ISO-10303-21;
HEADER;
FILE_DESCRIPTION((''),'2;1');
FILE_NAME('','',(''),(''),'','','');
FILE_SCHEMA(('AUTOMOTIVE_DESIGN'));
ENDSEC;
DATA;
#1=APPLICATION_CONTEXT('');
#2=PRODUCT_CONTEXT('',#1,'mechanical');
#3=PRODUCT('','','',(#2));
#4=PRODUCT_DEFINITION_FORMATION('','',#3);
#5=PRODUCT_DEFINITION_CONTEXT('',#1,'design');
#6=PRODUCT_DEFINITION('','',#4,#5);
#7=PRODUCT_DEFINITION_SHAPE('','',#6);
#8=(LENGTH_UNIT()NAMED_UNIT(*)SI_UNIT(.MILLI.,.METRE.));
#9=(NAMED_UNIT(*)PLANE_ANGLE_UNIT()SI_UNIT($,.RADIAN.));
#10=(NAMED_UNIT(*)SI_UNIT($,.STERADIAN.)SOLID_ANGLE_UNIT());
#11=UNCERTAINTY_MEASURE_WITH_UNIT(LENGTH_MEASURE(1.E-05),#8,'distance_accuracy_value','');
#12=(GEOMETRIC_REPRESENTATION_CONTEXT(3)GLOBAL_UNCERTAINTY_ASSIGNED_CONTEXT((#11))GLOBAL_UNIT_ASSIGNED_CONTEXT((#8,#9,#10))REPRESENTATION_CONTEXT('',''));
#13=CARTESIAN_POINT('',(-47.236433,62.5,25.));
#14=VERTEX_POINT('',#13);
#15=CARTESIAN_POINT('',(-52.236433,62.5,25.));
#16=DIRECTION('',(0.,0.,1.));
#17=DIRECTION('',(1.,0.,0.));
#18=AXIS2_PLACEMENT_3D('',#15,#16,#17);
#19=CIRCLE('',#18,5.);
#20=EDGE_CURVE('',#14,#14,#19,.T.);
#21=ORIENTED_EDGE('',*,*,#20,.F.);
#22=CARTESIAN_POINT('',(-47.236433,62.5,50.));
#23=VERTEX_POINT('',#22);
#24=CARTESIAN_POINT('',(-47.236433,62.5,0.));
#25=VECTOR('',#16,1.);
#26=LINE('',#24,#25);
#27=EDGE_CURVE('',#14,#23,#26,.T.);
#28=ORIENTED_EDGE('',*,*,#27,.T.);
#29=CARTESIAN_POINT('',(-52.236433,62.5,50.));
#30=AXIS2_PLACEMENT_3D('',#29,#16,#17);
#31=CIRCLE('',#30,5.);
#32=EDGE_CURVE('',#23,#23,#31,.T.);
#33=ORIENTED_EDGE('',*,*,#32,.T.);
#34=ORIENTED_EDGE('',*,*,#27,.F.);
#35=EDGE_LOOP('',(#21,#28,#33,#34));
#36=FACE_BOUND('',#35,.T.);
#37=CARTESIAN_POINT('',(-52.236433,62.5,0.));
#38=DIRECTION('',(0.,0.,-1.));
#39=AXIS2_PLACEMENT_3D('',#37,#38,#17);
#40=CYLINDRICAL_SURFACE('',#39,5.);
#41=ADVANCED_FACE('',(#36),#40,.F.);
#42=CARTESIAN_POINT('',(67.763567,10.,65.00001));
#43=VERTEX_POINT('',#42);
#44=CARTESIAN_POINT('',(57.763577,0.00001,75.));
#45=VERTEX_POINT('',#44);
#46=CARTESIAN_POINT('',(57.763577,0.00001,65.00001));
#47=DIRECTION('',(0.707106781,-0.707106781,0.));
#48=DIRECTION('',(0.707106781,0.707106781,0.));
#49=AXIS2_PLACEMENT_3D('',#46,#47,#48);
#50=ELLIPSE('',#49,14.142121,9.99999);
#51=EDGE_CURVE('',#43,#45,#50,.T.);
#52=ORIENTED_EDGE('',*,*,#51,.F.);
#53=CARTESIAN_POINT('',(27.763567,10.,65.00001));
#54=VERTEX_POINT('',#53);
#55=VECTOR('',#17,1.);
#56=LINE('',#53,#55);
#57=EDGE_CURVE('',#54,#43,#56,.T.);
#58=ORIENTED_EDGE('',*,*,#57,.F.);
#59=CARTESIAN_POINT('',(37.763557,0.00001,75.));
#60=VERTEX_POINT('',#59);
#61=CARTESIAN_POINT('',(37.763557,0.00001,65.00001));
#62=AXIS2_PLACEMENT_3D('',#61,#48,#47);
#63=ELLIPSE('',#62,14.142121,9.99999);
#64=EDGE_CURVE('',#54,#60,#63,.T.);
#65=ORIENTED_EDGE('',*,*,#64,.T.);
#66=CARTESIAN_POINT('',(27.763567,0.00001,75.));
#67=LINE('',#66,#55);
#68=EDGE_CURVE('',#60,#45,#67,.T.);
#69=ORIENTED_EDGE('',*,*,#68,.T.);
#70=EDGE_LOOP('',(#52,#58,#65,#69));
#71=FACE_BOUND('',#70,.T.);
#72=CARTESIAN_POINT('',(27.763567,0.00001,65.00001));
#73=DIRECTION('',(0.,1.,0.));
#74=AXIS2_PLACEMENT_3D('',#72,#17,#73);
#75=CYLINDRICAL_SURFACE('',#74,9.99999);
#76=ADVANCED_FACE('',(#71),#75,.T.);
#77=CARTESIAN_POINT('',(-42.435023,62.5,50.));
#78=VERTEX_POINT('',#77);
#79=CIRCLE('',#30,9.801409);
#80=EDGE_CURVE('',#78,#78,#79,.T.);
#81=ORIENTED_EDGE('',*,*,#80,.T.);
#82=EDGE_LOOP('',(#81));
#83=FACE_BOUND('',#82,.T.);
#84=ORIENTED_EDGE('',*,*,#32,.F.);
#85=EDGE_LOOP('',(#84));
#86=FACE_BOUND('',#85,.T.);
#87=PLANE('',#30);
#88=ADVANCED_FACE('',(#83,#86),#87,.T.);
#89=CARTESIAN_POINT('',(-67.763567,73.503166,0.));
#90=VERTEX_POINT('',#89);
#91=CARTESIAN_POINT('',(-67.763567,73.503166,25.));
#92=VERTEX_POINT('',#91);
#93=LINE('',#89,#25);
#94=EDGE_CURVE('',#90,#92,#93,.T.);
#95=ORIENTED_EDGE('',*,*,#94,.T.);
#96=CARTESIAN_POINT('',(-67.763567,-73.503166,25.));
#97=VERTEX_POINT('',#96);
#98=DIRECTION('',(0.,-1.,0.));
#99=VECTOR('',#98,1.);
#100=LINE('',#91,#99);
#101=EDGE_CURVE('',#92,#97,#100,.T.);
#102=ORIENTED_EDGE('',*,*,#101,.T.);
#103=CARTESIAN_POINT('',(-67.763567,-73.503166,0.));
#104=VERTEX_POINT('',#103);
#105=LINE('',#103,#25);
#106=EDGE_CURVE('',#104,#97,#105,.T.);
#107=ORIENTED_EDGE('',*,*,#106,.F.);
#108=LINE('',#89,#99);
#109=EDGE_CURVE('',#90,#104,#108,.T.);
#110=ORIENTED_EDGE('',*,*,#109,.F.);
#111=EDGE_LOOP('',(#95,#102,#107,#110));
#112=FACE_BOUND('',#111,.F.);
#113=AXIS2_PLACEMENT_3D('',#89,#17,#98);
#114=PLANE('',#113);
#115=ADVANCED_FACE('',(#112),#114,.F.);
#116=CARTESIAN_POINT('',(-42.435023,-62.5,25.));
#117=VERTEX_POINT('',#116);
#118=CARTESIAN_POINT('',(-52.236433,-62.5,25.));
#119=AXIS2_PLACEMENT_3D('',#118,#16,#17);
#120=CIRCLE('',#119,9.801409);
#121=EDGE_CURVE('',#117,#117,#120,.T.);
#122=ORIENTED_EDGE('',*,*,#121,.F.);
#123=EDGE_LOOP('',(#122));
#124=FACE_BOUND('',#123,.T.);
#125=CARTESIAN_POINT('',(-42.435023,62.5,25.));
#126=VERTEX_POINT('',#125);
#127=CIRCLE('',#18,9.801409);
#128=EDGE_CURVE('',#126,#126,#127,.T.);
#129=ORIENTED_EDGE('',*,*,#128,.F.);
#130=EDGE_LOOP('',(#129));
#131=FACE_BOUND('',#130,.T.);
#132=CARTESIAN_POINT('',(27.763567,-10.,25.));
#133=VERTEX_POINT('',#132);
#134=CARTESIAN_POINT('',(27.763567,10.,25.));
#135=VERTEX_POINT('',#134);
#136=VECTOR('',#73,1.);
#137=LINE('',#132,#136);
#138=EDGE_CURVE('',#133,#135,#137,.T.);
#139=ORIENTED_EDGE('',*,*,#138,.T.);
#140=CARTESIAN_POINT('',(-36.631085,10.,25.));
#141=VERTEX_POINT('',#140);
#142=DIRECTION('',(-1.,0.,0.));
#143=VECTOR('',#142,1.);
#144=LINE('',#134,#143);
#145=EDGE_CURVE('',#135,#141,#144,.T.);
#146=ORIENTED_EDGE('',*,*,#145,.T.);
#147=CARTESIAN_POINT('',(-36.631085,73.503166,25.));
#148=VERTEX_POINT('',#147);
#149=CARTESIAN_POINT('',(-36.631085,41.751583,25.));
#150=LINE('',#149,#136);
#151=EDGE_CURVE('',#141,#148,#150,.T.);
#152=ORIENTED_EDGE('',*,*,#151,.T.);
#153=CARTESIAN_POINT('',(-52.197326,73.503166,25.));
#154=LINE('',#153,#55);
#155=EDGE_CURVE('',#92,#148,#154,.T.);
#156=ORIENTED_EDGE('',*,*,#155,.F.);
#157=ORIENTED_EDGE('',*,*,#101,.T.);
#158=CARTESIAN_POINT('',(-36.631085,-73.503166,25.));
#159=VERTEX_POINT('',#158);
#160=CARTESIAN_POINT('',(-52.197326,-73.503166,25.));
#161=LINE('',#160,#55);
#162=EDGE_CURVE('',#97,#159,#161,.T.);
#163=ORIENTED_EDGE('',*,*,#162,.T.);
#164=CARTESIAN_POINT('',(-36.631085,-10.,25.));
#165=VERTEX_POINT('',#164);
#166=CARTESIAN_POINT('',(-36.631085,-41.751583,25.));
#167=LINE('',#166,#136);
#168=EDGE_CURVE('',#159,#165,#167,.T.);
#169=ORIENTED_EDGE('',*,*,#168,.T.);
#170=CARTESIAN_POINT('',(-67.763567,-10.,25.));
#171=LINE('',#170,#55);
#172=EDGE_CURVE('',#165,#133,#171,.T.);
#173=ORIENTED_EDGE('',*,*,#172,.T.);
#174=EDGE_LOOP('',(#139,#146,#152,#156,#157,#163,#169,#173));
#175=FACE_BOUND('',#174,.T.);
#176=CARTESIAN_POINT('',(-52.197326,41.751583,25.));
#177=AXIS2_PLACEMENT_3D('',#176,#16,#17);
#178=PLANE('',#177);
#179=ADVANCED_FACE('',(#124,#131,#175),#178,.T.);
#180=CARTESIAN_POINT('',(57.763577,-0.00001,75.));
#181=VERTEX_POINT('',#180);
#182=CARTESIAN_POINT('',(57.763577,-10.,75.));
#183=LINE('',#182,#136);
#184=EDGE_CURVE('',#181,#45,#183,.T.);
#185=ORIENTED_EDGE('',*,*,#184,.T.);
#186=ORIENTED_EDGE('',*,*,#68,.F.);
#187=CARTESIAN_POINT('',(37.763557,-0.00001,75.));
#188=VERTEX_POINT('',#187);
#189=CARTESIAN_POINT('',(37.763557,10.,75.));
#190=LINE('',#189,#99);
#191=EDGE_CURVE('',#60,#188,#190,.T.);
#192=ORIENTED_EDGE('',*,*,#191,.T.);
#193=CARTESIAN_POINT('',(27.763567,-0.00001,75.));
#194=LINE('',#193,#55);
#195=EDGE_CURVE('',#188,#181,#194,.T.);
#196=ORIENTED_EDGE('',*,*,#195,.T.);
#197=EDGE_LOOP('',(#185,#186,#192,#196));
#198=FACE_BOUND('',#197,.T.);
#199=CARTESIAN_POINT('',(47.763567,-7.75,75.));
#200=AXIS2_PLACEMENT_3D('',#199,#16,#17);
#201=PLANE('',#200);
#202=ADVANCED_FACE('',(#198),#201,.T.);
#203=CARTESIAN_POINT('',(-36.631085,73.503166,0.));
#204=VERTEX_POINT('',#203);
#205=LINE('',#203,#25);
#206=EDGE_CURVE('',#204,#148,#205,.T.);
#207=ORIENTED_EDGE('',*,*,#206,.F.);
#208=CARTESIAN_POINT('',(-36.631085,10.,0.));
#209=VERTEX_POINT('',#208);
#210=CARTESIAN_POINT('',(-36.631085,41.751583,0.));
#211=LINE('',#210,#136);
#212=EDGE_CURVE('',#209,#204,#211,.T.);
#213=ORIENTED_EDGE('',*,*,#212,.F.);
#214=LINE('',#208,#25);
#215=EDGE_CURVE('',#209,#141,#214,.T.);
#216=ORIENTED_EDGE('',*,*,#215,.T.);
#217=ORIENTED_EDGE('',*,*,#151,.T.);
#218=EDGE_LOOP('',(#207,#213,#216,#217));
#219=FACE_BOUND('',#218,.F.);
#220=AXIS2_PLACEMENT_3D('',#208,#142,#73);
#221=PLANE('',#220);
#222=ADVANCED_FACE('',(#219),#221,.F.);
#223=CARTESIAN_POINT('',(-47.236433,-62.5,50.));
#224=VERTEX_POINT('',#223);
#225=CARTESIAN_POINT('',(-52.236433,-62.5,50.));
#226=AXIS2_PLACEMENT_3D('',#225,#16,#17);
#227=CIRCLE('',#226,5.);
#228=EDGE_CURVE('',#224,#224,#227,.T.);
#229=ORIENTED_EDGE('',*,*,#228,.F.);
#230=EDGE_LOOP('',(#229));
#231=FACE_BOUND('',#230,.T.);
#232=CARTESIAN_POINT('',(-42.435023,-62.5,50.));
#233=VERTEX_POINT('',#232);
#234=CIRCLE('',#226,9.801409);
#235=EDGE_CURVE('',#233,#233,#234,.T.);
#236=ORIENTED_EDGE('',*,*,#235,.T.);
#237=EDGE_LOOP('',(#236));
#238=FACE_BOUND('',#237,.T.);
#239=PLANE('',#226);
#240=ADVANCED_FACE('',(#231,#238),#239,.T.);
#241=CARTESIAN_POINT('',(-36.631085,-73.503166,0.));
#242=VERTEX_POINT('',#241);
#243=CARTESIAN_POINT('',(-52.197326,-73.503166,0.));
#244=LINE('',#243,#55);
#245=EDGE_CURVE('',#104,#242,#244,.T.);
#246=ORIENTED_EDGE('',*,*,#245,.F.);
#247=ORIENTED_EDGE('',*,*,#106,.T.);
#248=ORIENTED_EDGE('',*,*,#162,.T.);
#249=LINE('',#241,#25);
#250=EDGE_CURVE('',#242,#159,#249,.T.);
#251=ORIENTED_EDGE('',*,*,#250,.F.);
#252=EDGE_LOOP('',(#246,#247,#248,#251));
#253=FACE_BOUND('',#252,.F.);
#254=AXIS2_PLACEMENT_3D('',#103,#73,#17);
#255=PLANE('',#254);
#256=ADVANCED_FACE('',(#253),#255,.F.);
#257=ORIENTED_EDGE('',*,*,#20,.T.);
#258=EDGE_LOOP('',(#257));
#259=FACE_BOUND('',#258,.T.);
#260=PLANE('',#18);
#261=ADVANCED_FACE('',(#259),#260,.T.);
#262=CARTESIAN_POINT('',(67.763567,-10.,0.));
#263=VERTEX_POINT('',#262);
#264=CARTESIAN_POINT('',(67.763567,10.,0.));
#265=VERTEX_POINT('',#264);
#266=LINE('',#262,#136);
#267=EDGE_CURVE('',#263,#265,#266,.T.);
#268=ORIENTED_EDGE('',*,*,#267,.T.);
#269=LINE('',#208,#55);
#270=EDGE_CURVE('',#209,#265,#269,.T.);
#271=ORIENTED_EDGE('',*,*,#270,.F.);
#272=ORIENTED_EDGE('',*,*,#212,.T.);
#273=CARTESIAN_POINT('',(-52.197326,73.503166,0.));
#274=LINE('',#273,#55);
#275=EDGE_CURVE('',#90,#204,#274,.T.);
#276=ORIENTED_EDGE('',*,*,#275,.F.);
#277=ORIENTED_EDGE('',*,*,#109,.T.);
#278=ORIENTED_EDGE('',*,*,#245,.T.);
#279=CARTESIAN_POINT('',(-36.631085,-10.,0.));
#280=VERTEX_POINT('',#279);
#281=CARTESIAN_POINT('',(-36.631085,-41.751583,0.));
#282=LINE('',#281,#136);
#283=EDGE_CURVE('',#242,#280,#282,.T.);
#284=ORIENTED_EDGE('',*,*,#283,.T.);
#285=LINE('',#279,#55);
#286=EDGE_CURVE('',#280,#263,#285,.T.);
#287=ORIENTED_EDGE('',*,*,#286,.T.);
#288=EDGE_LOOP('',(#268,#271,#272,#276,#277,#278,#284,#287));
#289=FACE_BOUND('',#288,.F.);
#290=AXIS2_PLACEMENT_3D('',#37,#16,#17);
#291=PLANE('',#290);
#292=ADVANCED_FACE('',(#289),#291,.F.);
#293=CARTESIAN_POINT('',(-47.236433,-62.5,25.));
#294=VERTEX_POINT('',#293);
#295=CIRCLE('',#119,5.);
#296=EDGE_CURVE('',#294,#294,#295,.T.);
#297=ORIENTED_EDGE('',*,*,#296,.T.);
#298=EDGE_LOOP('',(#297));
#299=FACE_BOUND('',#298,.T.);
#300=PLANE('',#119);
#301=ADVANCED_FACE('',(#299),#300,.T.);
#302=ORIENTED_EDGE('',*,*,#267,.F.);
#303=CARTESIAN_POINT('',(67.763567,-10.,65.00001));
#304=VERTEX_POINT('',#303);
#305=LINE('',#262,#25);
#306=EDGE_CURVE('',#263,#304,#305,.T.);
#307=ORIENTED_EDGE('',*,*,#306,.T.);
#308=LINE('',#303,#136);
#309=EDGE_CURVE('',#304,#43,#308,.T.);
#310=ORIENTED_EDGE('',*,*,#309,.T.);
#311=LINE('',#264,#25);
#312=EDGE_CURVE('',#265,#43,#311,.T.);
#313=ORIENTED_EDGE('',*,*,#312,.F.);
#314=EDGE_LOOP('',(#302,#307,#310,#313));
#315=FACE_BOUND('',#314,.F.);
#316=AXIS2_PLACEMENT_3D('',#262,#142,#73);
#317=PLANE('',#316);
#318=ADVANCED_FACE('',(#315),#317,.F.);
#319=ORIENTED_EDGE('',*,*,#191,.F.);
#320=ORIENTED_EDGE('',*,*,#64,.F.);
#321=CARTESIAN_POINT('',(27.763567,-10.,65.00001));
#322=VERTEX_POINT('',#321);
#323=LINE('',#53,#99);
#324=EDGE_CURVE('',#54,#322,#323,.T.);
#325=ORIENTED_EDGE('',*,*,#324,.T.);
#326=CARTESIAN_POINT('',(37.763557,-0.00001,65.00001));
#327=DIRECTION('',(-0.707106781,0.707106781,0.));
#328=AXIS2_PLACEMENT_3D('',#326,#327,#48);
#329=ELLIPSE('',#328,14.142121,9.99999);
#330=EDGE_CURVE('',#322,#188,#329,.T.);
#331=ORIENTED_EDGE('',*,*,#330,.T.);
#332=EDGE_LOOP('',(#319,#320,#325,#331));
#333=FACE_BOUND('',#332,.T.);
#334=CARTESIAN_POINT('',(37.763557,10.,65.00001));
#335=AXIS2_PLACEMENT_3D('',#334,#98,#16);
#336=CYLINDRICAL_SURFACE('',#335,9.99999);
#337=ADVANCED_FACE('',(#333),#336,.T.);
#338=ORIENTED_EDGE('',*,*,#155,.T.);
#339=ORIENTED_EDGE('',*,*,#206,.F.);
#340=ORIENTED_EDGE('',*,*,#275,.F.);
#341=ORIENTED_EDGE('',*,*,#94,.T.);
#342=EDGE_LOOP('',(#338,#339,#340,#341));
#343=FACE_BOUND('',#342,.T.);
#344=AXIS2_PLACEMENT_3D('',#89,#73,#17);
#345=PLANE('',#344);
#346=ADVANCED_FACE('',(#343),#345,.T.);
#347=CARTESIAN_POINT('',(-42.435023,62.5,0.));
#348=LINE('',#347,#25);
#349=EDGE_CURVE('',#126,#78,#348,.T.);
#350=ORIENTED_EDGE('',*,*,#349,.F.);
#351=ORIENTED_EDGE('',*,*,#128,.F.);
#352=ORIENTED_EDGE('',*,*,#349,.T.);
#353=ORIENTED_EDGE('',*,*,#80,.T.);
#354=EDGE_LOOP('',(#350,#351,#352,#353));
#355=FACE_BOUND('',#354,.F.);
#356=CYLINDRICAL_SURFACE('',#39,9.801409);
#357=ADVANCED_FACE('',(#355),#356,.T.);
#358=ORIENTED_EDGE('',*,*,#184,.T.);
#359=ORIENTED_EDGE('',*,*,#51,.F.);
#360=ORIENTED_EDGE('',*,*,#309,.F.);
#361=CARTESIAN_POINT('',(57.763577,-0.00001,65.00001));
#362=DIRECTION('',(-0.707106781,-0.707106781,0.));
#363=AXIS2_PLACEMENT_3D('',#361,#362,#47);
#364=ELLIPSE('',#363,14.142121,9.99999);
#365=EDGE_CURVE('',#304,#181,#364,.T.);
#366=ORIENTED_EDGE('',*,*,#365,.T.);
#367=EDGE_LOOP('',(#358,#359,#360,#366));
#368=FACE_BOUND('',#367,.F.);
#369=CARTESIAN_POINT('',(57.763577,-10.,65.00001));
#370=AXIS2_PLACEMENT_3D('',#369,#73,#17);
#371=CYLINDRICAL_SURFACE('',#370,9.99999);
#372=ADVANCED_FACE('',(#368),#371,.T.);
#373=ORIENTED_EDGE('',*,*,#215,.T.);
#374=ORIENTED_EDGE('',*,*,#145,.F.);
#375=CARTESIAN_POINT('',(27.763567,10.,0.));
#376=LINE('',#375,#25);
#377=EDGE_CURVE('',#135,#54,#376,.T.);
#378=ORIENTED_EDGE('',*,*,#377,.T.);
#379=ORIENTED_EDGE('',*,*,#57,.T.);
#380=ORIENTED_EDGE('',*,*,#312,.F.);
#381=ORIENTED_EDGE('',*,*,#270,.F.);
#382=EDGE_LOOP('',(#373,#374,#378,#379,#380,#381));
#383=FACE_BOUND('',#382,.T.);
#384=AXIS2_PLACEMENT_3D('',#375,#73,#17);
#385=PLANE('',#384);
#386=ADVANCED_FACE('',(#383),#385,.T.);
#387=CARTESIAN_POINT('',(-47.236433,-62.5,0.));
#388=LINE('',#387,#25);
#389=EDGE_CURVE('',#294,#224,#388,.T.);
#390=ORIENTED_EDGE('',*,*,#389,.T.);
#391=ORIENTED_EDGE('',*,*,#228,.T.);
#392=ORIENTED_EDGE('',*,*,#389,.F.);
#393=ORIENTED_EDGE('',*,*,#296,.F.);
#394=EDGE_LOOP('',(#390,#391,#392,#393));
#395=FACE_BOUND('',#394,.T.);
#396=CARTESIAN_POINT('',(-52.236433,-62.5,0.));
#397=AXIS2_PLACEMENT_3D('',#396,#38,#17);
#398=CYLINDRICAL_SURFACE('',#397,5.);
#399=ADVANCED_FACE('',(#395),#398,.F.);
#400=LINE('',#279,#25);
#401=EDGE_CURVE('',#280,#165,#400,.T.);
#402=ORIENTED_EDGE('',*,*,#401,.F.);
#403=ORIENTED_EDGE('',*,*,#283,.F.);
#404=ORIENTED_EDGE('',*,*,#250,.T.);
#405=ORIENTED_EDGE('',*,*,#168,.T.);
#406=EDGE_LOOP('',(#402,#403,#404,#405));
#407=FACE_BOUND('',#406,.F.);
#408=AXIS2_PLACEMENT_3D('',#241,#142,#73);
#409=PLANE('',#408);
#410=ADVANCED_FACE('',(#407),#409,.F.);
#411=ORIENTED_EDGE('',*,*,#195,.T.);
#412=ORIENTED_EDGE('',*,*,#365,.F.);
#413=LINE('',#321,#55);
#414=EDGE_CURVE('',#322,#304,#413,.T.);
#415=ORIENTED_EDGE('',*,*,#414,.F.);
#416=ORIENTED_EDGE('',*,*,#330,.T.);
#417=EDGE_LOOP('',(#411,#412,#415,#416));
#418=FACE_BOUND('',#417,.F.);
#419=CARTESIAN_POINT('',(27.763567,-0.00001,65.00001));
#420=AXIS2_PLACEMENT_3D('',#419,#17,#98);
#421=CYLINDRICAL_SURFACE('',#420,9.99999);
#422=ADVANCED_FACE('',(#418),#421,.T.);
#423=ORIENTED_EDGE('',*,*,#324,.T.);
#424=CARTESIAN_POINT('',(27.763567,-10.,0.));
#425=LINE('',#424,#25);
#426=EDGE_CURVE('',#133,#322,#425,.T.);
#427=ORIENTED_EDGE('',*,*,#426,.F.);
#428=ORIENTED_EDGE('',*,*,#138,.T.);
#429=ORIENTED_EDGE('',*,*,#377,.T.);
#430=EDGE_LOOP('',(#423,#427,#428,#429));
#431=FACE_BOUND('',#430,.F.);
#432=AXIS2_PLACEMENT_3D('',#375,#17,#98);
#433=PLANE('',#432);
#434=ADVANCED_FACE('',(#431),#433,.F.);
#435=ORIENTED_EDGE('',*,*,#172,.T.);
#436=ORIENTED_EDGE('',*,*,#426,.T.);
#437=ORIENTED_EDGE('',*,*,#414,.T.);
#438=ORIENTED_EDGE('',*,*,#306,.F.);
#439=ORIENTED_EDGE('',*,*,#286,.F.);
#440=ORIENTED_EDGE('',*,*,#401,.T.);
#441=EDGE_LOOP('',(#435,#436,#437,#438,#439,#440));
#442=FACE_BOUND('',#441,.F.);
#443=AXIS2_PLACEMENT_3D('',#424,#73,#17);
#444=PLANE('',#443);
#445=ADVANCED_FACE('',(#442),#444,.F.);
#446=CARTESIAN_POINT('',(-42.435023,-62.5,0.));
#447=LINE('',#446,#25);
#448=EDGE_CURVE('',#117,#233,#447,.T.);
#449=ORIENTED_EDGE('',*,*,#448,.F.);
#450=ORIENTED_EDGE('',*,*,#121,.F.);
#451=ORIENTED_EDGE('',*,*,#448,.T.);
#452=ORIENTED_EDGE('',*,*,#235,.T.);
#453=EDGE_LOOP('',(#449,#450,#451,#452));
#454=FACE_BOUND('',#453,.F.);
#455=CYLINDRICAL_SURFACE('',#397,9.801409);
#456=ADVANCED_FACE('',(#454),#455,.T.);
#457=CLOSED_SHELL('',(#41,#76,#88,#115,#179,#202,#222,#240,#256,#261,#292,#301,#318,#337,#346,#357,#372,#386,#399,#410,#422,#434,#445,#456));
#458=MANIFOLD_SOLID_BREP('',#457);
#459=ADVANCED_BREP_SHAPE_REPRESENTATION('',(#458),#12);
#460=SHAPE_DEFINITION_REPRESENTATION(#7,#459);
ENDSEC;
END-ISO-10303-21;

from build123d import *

# Parameters (mm, degrees)
F0_R     = 9.8014094823
F0_R_2   = 5
F1_DEPTH = 50
F0_W     = 31.1324822545
F0_H     = 63.5031664371
F2_DEPTH = 25
F0_W_2   = 40
F0_H_2   = 4.5
F0_H_3   = 5.5
F3_DEPTH = 75
F4_R     = 9.99999
F5_DEPTH = 25


# Not quite as in the source:
# - a fillet or chamfer is up to 0.001 mm smaller than in the source, because OpenCascade refuses the exact size


with BuildPart() as f1:
    # F0 (on Top) → F1 (new body)
    with BuildSketch(Plane.XY):
        with Locations((-52.2364327669, -62.5)):
            Circle(F0_R)
        with Locations((-52.2364327669, -62.5)):
            Circle(F0_R_2, mode=Mode.SUBTRACT)
    extrude(amount=F1_DEPTH)



with BuildPart() as f1b:
    # F0 (on Top) → F1, piece 2 (new body)
    with BuildSketch(Plane.XY):
        with Locations((-52.2364327669, 62.5)):
            Circle(F0_R)
        with Locations((-52.2364327669, 62.5)):
            Circle(F0_R_2, mode=Mode.SUBTRACT)
    extrude(amount=F1_DEPTH)


with BuildPart() as f1_1:
    add(f1.part)

    add(f1b.part)  # F2 merges F1b
    # F0 (on Top) → F2 (join)
    with BuildSketch(Plane.XY):
        with Locations((-52.1973261058, 41.7515832186)):
            Rectangle(F0_W, F0_H)
        with Locations((-52.2364327669, 62.5)):
            Circle(F0_R, mode=Mode.SUBTRACT)
        Polygon((-36.6310849786, -10), (27.7635672331, -10), (27.7635672331, -5.5), (27.7635672331, 0), (27.7635672331, 5.5), (27.7635672331, 10), (-36.6310849786, 10), (-67.7635672331, 10), (-67.7635672331, -10), align=None)
        with Locations((-52.1973261058, -41.7515832186)):
            Rectangle(F0_W, F0_H)
        with Locations((-52.2364327669, -62.5)):
            Circle(F0_R, mode=Mode.SUBTRACT)
    extrude(amount=F2_DEPTH)

    # F0 (on Top) → F3 (join)
    with BuildSketch(Plane.XY):
        with Locations((47.7635672331, -7.75)):
            Rectangle(F0_W_2, F0_H_2)
        with Locations((47.7635672331, -2.75)):
            Rectangle(F0_W_2, F0_H_3)
        with Locations((47.7635672331, 2.75)):
            Rectangle(F0_W_2, F0_H_3)
        with Locations((47.7635672331, 7.75)):
            Rectangle(F0_W_2, F0_H_2)
    extrude(amount=F3_DEPTH)

    # F4 (radius 10 in the source; OpenCascade refuses exactly that, so slightly less here)
    f4_edges = [f1_1.edges().sort_by_distance(p)[0] for p in [
        (47.763567, -10, 75),
        (67.763567, 0, 75),
        (47.763567, 10, 75),
        (27.763567, 0, 75),
    ]]
    fillet(f4_edges, radius=F4_R)

    # F0 (on Top) → F5 (join)
    with BuildSketch(Plane.XY):
        with Locations((-52.2364327669, 62.5)):
            Circle(F0_R_2)
        with Locations((-52.2364327669, -62.5)):
            Circle(F0_R_2)
    extrude(amount=F5_DEPTH)


solid = f1_1.part
